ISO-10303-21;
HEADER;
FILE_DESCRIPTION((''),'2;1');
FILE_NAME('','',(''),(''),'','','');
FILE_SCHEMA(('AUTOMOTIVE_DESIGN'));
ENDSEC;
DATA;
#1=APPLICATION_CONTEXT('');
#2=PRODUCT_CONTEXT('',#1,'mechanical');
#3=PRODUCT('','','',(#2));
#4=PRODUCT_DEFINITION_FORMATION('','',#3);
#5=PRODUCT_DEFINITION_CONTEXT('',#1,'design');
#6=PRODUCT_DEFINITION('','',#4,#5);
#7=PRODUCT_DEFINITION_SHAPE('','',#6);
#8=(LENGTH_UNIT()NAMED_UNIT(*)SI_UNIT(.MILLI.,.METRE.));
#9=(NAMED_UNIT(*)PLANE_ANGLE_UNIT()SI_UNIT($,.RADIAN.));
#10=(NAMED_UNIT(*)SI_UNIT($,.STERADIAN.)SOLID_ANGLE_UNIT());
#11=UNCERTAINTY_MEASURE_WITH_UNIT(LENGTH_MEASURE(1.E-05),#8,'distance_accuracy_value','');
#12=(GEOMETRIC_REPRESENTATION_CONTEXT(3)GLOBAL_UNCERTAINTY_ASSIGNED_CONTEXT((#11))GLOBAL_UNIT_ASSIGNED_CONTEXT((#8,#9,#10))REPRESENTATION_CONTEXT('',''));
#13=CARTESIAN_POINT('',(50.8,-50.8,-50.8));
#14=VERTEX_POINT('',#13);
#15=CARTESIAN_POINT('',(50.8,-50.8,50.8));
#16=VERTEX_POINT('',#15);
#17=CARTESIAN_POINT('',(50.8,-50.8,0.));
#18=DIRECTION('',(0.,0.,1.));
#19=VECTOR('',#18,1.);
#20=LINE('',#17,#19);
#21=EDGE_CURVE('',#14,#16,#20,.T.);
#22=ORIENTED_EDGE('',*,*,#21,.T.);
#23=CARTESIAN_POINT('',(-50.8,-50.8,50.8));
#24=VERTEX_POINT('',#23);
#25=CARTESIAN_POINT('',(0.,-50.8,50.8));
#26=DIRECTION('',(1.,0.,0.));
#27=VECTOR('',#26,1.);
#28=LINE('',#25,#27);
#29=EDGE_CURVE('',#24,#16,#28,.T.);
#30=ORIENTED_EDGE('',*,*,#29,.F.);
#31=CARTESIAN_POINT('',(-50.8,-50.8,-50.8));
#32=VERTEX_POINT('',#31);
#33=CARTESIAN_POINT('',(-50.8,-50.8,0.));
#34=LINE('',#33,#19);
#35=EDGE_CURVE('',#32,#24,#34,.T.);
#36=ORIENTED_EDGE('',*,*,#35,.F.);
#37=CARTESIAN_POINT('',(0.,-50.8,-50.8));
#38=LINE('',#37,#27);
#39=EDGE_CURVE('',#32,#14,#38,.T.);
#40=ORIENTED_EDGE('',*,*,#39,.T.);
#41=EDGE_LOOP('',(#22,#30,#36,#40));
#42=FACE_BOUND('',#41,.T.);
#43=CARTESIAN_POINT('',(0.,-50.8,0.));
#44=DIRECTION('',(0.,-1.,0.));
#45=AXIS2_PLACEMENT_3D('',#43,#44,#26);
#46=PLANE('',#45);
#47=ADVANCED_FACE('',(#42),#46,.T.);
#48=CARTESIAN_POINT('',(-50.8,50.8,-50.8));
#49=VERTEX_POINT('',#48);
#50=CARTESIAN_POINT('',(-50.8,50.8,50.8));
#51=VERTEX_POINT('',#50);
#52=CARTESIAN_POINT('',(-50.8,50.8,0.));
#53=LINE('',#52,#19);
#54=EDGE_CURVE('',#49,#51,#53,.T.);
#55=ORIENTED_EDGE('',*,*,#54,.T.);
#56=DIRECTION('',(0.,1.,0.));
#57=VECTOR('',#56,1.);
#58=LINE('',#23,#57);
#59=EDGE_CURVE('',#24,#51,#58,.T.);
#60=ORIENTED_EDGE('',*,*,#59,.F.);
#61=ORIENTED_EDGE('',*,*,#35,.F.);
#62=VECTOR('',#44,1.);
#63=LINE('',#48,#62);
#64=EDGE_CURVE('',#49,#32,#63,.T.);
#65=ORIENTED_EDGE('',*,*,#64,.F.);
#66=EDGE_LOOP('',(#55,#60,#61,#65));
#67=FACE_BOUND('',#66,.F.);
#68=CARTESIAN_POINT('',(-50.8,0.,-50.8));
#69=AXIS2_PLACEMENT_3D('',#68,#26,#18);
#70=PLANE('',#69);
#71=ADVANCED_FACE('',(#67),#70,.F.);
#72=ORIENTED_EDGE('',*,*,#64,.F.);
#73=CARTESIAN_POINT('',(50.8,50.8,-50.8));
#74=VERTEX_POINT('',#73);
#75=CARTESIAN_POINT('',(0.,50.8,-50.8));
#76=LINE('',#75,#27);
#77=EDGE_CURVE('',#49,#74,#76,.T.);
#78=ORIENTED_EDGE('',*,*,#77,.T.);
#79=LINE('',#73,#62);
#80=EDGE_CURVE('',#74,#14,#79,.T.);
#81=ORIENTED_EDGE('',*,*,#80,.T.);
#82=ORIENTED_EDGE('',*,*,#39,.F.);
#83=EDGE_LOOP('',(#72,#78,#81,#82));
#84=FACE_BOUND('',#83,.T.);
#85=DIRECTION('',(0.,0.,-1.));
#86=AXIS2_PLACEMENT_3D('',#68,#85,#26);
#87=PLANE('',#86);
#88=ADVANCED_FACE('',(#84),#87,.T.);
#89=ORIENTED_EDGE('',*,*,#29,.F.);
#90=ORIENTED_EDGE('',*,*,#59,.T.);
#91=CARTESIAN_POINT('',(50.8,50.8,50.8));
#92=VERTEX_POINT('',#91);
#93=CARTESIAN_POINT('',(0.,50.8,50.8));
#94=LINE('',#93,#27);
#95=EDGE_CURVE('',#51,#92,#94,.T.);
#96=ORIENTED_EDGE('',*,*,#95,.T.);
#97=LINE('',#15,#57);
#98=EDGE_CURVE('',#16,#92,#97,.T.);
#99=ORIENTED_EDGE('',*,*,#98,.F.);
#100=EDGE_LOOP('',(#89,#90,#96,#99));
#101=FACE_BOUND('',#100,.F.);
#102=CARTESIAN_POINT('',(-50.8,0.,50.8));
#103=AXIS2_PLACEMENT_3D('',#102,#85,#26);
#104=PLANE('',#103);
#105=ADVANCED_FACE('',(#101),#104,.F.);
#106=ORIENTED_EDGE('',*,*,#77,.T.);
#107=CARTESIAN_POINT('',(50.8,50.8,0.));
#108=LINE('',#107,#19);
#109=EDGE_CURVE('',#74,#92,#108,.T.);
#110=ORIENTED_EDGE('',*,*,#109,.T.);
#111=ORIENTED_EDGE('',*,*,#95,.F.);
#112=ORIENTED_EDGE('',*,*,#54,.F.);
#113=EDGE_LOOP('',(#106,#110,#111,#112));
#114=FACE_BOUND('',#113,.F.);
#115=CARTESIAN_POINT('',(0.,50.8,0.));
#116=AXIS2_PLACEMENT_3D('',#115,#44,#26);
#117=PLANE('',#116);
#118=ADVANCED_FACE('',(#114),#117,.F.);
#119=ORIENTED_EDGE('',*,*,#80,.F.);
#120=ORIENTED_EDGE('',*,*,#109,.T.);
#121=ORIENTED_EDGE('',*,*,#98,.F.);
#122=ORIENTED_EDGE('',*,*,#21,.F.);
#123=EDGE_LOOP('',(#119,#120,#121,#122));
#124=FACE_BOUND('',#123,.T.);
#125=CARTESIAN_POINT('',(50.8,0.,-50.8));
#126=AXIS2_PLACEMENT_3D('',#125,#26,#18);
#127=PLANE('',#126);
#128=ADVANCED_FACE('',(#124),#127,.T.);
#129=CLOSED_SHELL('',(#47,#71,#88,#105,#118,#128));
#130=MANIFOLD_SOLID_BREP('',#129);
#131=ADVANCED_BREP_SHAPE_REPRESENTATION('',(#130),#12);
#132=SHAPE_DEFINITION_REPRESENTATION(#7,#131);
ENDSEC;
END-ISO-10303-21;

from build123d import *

# Parameters (mm, degrees)
F1_W     = 101.6
F1_H     = 101.6
F2_DEPTH = 50.8
F3_W     = 38.1
F3_H     = 38.1
F4_DEPTH = 25.4
F5_DEPTH = 25.4


# Not quite as in the source:
# - a variable given as a bare number and used for a length is read in inches; the dataset says mm whatever the document's units were


with BuildPart() as f2:
    # F1 (on Front) → F2 (new body, symmetric)
    with BuildSketch(Plane.XZ):
        Rectangle(F1_W, F1_H)
    extrude(amount=F2_DEPTH, both=True)

    # F3 (on face) → F4 (join)
    with BuildSketch(Plane.XZ.offset(50.8)):
        Rectangle(F3_W, F3_H)
    extrude(amount=F4_DEPTH)

    # F5 (cut): a face of the model
    f5_faces = [f2.faces().sort_by_distance(p)[0] for p in [
        (0, -76.2, 0),
    ]]
    extrude(f5_faces, amount=-F5_DEPTH, mode=Mode.SUBTRACT)


solid = f2.part
